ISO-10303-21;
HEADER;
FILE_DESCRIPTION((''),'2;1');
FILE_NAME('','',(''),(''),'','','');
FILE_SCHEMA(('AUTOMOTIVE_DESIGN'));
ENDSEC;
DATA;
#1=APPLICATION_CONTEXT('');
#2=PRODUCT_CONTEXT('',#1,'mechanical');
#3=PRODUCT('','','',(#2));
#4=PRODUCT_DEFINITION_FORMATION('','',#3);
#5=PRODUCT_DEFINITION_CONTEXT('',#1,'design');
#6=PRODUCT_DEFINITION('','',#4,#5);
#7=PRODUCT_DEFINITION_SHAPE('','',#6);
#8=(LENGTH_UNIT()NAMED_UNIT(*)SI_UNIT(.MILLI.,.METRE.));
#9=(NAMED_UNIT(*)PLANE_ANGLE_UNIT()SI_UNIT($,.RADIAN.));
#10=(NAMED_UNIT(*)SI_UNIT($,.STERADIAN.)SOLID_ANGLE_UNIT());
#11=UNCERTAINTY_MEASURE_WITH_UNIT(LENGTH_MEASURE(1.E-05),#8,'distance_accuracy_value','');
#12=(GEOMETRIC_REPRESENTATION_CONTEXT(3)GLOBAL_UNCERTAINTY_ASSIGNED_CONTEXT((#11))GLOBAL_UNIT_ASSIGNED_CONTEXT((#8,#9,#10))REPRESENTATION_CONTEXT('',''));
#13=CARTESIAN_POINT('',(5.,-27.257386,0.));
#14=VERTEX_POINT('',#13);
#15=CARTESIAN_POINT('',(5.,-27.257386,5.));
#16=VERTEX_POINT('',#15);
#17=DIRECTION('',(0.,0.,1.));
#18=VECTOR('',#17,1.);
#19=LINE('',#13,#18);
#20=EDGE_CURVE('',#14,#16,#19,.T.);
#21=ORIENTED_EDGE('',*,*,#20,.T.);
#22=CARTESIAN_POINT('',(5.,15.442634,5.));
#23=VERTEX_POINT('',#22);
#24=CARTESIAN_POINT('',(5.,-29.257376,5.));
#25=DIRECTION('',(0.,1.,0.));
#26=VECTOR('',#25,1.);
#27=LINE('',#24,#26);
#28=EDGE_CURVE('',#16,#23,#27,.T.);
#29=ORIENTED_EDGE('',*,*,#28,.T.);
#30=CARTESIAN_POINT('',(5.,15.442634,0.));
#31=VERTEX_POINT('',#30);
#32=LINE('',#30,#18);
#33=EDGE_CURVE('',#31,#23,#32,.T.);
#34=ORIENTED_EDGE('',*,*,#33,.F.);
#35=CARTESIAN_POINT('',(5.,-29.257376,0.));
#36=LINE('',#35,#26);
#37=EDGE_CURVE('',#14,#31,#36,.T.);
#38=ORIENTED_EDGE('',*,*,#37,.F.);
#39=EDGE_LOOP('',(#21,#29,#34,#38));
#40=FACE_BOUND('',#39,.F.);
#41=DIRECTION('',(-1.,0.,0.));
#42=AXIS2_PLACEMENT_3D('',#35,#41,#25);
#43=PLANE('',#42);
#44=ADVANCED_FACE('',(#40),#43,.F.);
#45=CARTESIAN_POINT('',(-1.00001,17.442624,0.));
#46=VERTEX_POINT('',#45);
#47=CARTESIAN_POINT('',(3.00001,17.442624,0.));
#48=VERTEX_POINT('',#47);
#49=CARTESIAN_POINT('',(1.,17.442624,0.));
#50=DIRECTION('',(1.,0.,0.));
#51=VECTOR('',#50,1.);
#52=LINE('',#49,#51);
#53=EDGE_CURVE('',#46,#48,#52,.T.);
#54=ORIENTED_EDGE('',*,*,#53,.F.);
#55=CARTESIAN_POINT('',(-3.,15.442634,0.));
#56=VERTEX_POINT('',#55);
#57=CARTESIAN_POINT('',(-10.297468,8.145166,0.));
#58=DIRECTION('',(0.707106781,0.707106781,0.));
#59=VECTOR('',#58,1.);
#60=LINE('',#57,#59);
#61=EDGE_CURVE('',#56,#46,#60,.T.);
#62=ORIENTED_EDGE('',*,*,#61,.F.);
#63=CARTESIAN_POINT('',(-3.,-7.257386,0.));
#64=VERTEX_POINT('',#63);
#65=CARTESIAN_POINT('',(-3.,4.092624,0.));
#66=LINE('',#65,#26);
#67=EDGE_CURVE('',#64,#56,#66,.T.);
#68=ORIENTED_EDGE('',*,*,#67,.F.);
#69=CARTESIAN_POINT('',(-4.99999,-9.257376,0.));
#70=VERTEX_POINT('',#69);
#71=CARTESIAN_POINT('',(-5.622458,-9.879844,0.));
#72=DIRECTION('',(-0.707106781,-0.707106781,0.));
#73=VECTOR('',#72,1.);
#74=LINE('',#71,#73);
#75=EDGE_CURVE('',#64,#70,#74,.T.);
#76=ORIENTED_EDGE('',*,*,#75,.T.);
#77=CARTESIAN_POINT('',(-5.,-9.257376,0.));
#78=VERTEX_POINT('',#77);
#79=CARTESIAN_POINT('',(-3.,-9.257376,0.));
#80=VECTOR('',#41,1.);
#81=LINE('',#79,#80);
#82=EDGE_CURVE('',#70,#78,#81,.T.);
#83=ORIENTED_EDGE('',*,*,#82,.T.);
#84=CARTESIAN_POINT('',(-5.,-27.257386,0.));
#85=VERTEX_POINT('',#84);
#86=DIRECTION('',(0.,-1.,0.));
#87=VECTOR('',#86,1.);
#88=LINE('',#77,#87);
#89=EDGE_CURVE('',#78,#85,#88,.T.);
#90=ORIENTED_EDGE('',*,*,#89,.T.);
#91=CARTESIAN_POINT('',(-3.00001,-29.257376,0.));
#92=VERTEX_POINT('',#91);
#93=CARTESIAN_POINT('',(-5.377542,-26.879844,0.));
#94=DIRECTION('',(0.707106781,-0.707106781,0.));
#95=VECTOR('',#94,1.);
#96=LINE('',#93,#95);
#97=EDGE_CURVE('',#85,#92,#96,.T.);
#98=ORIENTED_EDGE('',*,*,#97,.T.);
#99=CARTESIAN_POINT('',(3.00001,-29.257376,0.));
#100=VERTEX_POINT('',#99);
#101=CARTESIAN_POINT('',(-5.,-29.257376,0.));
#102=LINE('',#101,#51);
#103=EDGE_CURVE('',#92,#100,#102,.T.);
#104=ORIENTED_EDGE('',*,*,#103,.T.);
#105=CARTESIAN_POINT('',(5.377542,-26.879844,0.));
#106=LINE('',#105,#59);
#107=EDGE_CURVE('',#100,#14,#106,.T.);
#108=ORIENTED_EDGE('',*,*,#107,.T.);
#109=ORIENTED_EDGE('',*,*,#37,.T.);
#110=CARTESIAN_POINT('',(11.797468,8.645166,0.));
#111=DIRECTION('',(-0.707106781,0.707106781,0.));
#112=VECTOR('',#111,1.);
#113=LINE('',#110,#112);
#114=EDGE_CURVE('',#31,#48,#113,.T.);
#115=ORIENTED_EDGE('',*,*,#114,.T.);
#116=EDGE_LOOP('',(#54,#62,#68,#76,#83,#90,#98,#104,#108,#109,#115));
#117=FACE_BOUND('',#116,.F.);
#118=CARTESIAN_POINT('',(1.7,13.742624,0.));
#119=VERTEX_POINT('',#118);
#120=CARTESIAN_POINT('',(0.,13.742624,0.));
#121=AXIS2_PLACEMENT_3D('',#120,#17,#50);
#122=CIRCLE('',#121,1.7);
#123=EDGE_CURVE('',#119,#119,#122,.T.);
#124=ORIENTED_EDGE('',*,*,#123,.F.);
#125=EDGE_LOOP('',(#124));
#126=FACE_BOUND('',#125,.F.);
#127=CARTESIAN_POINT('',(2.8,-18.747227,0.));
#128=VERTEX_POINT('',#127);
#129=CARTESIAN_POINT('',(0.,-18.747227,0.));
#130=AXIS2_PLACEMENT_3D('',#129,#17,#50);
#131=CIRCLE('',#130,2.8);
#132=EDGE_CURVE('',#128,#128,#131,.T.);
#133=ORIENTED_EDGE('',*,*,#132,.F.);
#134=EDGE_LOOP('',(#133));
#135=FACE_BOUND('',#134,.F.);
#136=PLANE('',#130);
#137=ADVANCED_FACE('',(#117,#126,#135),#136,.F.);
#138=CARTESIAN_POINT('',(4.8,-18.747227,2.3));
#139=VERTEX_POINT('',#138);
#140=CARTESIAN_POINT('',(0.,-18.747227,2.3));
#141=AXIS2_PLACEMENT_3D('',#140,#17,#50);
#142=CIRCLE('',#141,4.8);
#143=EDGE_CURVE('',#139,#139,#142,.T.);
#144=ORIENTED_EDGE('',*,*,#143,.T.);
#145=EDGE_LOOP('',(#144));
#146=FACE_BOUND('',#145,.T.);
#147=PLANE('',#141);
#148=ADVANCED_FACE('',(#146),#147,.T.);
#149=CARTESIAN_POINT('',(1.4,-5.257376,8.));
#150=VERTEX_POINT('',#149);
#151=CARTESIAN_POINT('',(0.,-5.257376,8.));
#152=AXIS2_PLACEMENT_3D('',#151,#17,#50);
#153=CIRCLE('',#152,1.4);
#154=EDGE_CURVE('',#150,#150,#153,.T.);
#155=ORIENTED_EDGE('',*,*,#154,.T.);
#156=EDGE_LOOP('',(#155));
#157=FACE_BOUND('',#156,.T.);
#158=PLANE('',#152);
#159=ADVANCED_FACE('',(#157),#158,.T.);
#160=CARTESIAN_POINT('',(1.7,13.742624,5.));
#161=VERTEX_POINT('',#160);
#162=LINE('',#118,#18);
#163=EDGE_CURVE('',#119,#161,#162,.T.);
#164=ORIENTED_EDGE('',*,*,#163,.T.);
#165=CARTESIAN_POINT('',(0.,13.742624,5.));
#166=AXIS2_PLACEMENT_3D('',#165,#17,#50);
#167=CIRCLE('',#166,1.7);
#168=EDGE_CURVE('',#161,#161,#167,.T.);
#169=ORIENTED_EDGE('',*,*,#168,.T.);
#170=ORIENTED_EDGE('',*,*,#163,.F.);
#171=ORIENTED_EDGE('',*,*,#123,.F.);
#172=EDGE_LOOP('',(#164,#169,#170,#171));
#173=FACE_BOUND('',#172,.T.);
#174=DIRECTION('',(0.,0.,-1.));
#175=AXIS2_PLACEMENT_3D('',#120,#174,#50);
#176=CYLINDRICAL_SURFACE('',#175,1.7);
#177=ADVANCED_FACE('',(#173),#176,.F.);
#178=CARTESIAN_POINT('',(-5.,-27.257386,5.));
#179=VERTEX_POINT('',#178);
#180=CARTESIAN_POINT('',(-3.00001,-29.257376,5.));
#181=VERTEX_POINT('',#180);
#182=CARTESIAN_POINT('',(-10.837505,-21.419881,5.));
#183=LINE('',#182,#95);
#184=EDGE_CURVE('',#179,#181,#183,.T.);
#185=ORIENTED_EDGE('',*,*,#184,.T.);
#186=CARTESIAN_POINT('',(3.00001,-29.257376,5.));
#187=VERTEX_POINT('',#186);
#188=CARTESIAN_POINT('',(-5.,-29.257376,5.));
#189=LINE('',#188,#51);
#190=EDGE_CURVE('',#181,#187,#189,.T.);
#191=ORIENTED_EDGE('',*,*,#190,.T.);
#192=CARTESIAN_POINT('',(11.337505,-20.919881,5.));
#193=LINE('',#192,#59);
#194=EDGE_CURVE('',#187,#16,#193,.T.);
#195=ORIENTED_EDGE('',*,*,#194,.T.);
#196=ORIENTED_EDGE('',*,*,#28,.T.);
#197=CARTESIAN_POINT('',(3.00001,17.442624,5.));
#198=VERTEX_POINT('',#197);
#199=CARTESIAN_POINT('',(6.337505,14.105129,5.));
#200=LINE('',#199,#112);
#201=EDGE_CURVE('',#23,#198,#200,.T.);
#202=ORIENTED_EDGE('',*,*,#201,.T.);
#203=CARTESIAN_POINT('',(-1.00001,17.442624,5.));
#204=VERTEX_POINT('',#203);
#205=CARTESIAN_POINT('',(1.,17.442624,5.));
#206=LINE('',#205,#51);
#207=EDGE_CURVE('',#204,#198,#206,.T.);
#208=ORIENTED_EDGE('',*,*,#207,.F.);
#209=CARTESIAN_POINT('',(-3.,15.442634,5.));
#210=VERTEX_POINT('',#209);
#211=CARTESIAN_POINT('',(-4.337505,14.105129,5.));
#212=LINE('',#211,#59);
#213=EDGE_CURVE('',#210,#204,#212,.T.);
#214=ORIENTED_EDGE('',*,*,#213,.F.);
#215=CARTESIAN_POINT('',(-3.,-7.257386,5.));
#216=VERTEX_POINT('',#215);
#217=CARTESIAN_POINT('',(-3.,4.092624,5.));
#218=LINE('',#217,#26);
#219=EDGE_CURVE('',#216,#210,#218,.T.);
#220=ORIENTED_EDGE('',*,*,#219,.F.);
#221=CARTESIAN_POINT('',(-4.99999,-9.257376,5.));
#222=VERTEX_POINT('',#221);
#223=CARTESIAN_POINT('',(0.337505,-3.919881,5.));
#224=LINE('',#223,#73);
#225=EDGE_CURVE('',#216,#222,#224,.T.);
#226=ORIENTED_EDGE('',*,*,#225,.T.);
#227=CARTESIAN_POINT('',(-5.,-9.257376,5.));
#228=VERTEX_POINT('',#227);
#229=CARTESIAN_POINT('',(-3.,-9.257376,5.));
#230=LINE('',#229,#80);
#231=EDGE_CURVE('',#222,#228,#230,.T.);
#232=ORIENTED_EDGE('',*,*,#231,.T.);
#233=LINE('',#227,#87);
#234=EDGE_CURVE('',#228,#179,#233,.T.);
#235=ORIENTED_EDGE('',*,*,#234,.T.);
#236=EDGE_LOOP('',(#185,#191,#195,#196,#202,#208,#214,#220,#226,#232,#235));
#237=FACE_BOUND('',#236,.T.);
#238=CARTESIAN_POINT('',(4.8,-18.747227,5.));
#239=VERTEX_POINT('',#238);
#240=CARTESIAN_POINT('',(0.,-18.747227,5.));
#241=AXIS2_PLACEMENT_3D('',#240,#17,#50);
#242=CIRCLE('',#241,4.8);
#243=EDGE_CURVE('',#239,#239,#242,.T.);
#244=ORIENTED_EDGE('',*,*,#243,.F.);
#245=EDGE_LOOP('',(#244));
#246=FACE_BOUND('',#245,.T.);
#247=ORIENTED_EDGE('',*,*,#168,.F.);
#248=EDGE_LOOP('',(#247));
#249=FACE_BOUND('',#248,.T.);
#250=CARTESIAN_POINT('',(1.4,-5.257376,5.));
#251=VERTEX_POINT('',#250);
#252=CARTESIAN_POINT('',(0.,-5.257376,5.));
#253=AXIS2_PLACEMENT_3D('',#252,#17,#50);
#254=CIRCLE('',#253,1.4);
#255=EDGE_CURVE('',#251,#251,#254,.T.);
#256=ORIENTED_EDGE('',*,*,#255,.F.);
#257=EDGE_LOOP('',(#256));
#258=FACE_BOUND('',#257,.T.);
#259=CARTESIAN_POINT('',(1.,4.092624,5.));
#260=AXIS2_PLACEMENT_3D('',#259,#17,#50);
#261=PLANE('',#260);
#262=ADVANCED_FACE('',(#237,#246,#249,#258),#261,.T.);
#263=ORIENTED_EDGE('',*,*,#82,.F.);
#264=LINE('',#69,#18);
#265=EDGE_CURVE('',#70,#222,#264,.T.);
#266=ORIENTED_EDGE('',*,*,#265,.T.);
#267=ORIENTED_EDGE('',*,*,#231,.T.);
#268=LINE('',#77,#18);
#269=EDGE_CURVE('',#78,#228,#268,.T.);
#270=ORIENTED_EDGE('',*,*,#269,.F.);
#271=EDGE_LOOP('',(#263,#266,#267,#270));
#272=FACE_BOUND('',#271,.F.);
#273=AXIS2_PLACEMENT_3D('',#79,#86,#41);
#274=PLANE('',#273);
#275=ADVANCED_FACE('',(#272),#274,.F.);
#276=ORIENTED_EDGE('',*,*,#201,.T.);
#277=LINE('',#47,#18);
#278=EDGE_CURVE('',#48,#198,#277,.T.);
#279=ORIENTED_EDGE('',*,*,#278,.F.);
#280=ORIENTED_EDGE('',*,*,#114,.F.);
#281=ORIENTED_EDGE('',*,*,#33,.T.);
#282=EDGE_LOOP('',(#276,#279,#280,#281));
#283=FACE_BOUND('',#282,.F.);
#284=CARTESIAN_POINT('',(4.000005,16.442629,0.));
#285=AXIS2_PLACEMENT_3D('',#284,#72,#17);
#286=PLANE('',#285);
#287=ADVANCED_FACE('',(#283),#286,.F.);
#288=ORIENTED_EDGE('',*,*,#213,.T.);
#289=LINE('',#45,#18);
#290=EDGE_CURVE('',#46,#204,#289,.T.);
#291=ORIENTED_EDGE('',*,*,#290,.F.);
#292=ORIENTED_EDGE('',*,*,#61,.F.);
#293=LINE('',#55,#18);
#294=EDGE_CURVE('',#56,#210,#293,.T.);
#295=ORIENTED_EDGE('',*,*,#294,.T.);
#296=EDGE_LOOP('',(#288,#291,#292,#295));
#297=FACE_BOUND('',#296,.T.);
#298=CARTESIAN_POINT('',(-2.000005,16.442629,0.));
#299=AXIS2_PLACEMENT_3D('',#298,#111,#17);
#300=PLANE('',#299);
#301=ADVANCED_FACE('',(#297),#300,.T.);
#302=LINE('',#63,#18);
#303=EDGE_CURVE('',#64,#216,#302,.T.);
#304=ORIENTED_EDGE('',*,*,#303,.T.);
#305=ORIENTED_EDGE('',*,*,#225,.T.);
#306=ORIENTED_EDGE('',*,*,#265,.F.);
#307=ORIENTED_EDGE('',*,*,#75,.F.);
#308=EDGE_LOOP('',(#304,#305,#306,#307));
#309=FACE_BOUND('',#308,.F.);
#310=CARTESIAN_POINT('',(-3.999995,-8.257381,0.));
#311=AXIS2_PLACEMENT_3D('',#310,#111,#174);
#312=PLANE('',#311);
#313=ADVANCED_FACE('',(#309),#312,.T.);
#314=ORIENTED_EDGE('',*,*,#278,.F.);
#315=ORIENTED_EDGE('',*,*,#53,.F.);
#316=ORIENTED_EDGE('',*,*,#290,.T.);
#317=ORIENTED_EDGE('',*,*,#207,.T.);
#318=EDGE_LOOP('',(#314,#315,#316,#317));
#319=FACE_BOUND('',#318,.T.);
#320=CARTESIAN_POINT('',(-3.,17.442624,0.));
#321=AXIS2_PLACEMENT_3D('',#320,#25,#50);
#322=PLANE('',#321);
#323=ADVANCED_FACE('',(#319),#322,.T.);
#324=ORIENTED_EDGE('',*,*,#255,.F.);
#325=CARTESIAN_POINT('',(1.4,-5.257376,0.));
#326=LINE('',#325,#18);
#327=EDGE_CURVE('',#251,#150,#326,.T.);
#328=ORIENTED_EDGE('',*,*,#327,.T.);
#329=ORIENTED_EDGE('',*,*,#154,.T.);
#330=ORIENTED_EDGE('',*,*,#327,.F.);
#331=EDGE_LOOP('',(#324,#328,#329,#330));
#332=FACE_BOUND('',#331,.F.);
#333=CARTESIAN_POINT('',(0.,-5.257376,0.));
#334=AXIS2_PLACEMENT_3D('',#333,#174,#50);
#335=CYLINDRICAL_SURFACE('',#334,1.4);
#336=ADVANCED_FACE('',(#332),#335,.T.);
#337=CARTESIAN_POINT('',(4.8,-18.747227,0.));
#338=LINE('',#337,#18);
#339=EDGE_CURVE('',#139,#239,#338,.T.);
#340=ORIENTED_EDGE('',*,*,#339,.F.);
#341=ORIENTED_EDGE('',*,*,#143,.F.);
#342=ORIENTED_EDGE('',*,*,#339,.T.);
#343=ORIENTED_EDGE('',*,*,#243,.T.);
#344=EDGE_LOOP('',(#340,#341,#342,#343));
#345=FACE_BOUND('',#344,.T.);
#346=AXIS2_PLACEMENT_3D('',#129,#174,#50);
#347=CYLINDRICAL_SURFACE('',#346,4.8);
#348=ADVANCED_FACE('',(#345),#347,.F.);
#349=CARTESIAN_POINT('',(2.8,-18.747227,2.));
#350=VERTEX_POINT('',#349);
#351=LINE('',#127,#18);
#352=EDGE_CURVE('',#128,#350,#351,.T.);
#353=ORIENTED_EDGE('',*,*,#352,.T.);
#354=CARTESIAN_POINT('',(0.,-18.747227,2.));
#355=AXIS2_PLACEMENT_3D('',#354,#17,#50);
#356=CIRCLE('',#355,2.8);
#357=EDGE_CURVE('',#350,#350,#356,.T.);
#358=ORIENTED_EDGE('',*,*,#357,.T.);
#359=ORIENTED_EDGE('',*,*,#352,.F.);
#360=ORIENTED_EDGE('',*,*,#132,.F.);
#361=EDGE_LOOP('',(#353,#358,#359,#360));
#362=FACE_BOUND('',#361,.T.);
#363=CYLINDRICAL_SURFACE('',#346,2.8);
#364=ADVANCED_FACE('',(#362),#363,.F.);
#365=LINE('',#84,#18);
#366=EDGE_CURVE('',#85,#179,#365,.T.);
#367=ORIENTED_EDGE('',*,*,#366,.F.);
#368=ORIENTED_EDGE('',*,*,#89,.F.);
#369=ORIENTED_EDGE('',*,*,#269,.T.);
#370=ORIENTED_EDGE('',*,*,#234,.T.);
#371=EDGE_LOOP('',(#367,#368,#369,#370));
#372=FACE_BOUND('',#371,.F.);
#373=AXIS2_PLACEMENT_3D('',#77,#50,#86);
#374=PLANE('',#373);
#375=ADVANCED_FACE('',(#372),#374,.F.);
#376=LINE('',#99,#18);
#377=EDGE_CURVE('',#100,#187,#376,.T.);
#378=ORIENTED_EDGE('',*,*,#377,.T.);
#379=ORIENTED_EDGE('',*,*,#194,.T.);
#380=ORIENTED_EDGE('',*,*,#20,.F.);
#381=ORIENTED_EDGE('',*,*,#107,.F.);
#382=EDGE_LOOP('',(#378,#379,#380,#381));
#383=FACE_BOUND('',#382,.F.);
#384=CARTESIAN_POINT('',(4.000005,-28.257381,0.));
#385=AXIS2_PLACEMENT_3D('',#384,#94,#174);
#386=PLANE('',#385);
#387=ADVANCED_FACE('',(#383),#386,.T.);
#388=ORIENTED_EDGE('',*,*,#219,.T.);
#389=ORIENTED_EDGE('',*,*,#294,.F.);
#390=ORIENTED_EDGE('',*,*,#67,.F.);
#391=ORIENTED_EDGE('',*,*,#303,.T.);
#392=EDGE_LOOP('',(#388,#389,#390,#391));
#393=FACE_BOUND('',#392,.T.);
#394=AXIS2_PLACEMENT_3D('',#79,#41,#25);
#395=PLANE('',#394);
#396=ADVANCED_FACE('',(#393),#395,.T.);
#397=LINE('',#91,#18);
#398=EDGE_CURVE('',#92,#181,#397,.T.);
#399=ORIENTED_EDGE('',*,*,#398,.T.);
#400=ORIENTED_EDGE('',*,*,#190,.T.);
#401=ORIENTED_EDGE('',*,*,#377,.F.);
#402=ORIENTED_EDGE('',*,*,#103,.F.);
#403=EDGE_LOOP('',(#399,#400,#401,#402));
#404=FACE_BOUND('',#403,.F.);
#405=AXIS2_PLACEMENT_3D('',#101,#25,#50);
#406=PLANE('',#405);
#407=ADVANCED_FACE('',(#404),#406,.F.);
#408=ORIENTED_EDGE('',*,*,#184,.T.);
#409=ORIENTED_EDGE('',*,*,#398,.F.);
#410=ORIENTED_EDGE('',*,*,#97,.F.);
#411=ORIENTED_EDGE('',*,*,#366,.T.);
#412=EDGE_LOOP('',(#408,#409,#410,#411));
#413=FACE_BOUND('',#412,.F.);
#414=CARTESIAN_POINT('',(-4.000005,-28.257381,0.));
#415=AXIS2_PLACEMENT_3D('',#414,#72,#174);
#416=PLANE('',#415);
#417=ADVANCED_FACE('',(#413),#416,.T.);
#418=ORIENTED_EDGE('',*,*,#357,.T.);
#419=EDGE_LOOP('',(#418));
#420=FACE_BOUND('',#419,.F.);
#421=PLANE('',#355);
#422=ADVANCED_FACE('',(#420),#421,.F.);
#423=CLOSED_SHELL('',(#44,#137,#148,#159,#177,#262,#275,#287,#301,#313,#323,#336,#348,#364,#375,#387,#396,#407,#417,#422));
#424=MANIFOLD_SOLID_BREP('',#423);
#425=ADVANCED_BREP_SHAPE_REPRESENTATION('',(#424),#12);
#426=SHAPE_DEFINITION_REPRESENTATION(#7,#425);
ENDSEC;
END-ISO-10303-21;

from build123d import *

# Parameters (mm, degrees)
F0_W     = 8
F0_H     = 26.7
F0_R     = 1.4
F0_R_2   = 1.7
F0_R_3   = 4.8
F1_DEPTH = 5
F2_DEPTH = 8
F0_R_4   = 2.8
F3_DEPTH = 2.3
F4_START = 2
F4_DEPTH = 0.3
F5_SIZE  = 1.99999


# Not quite as in the source:
# - a fillet or chamfer is up to 0.001 mm smaller than in the source, because OpenCascade refuses the exact size


with BuildPart() as f1:
    # F0 (on Top) → F1 (new body)
    with BuildSketch(Plane.XY):
        with Locations((1, 4.0926239572)):
            Rectangle(F0_W, F0_H)
        with Locations((0, -5.2573760428)):
            Circle(F0_R, mode=Mode.SUBTRACT)
        with Locations((0, 13.7426239572)):
            Circle(F0_R_2, mode=Mode.SUBTRACT)
        Polygon((-5, -9.2573760428), (-5, -29.2573760428), (5, -29.2573760428), (5, -9.2573760428), (-3, -9.2573760428), align=None)
        with Locations((0, -18.7472271925)):
            Circle(F0_R_3, mode=Mode.SUBTRACT)
    extrude(amount=F1_DEPTH)

    # F0 (on Top) → F2 (join)
    with BuildSketch(Plane.XY):
        with Locations((0, -5.2573760428)):
            Circle(F0_R)
    extrude(amount=F2_DEPTH)

    # F0 (on Top) → F3 (join)
    with BuildSketch(Plane.XY):
        with Locations((0, -18.7472271925)):
            Circle(F0_R_3)
        with Locations((0, -18.7472271925)):
            Circle(F0_R_4, mode=Mode.SUBTRACT)
    extrude(amount=F3_DEPTH)

    # F0 (on Top) → F4 (join)
    with BuildSketch(Plane.XY.offset(F4_START)):
        with Locations((0, -18.7472271925)):
            Circle(F0_R_4)
    extrude(amount=F4_DEPTH)

    # F5 (size 2 in the source; OpenCascade refuses exactly that, so slightly less here)
    f5_edges = [f1.edges().sort_by_distance(p)[0] for p in [
        (-3, -9.257376, 2.5),
        (-3, 17.442624, 2.5),
        (5, 17.442624, 2.5),
        (5, -29.257376, 2.5),
        (-5, -29.257376, 2.5),
    ]]
    chamfer(f5_edges, length=F5_SIZE)


solid = f1.part
